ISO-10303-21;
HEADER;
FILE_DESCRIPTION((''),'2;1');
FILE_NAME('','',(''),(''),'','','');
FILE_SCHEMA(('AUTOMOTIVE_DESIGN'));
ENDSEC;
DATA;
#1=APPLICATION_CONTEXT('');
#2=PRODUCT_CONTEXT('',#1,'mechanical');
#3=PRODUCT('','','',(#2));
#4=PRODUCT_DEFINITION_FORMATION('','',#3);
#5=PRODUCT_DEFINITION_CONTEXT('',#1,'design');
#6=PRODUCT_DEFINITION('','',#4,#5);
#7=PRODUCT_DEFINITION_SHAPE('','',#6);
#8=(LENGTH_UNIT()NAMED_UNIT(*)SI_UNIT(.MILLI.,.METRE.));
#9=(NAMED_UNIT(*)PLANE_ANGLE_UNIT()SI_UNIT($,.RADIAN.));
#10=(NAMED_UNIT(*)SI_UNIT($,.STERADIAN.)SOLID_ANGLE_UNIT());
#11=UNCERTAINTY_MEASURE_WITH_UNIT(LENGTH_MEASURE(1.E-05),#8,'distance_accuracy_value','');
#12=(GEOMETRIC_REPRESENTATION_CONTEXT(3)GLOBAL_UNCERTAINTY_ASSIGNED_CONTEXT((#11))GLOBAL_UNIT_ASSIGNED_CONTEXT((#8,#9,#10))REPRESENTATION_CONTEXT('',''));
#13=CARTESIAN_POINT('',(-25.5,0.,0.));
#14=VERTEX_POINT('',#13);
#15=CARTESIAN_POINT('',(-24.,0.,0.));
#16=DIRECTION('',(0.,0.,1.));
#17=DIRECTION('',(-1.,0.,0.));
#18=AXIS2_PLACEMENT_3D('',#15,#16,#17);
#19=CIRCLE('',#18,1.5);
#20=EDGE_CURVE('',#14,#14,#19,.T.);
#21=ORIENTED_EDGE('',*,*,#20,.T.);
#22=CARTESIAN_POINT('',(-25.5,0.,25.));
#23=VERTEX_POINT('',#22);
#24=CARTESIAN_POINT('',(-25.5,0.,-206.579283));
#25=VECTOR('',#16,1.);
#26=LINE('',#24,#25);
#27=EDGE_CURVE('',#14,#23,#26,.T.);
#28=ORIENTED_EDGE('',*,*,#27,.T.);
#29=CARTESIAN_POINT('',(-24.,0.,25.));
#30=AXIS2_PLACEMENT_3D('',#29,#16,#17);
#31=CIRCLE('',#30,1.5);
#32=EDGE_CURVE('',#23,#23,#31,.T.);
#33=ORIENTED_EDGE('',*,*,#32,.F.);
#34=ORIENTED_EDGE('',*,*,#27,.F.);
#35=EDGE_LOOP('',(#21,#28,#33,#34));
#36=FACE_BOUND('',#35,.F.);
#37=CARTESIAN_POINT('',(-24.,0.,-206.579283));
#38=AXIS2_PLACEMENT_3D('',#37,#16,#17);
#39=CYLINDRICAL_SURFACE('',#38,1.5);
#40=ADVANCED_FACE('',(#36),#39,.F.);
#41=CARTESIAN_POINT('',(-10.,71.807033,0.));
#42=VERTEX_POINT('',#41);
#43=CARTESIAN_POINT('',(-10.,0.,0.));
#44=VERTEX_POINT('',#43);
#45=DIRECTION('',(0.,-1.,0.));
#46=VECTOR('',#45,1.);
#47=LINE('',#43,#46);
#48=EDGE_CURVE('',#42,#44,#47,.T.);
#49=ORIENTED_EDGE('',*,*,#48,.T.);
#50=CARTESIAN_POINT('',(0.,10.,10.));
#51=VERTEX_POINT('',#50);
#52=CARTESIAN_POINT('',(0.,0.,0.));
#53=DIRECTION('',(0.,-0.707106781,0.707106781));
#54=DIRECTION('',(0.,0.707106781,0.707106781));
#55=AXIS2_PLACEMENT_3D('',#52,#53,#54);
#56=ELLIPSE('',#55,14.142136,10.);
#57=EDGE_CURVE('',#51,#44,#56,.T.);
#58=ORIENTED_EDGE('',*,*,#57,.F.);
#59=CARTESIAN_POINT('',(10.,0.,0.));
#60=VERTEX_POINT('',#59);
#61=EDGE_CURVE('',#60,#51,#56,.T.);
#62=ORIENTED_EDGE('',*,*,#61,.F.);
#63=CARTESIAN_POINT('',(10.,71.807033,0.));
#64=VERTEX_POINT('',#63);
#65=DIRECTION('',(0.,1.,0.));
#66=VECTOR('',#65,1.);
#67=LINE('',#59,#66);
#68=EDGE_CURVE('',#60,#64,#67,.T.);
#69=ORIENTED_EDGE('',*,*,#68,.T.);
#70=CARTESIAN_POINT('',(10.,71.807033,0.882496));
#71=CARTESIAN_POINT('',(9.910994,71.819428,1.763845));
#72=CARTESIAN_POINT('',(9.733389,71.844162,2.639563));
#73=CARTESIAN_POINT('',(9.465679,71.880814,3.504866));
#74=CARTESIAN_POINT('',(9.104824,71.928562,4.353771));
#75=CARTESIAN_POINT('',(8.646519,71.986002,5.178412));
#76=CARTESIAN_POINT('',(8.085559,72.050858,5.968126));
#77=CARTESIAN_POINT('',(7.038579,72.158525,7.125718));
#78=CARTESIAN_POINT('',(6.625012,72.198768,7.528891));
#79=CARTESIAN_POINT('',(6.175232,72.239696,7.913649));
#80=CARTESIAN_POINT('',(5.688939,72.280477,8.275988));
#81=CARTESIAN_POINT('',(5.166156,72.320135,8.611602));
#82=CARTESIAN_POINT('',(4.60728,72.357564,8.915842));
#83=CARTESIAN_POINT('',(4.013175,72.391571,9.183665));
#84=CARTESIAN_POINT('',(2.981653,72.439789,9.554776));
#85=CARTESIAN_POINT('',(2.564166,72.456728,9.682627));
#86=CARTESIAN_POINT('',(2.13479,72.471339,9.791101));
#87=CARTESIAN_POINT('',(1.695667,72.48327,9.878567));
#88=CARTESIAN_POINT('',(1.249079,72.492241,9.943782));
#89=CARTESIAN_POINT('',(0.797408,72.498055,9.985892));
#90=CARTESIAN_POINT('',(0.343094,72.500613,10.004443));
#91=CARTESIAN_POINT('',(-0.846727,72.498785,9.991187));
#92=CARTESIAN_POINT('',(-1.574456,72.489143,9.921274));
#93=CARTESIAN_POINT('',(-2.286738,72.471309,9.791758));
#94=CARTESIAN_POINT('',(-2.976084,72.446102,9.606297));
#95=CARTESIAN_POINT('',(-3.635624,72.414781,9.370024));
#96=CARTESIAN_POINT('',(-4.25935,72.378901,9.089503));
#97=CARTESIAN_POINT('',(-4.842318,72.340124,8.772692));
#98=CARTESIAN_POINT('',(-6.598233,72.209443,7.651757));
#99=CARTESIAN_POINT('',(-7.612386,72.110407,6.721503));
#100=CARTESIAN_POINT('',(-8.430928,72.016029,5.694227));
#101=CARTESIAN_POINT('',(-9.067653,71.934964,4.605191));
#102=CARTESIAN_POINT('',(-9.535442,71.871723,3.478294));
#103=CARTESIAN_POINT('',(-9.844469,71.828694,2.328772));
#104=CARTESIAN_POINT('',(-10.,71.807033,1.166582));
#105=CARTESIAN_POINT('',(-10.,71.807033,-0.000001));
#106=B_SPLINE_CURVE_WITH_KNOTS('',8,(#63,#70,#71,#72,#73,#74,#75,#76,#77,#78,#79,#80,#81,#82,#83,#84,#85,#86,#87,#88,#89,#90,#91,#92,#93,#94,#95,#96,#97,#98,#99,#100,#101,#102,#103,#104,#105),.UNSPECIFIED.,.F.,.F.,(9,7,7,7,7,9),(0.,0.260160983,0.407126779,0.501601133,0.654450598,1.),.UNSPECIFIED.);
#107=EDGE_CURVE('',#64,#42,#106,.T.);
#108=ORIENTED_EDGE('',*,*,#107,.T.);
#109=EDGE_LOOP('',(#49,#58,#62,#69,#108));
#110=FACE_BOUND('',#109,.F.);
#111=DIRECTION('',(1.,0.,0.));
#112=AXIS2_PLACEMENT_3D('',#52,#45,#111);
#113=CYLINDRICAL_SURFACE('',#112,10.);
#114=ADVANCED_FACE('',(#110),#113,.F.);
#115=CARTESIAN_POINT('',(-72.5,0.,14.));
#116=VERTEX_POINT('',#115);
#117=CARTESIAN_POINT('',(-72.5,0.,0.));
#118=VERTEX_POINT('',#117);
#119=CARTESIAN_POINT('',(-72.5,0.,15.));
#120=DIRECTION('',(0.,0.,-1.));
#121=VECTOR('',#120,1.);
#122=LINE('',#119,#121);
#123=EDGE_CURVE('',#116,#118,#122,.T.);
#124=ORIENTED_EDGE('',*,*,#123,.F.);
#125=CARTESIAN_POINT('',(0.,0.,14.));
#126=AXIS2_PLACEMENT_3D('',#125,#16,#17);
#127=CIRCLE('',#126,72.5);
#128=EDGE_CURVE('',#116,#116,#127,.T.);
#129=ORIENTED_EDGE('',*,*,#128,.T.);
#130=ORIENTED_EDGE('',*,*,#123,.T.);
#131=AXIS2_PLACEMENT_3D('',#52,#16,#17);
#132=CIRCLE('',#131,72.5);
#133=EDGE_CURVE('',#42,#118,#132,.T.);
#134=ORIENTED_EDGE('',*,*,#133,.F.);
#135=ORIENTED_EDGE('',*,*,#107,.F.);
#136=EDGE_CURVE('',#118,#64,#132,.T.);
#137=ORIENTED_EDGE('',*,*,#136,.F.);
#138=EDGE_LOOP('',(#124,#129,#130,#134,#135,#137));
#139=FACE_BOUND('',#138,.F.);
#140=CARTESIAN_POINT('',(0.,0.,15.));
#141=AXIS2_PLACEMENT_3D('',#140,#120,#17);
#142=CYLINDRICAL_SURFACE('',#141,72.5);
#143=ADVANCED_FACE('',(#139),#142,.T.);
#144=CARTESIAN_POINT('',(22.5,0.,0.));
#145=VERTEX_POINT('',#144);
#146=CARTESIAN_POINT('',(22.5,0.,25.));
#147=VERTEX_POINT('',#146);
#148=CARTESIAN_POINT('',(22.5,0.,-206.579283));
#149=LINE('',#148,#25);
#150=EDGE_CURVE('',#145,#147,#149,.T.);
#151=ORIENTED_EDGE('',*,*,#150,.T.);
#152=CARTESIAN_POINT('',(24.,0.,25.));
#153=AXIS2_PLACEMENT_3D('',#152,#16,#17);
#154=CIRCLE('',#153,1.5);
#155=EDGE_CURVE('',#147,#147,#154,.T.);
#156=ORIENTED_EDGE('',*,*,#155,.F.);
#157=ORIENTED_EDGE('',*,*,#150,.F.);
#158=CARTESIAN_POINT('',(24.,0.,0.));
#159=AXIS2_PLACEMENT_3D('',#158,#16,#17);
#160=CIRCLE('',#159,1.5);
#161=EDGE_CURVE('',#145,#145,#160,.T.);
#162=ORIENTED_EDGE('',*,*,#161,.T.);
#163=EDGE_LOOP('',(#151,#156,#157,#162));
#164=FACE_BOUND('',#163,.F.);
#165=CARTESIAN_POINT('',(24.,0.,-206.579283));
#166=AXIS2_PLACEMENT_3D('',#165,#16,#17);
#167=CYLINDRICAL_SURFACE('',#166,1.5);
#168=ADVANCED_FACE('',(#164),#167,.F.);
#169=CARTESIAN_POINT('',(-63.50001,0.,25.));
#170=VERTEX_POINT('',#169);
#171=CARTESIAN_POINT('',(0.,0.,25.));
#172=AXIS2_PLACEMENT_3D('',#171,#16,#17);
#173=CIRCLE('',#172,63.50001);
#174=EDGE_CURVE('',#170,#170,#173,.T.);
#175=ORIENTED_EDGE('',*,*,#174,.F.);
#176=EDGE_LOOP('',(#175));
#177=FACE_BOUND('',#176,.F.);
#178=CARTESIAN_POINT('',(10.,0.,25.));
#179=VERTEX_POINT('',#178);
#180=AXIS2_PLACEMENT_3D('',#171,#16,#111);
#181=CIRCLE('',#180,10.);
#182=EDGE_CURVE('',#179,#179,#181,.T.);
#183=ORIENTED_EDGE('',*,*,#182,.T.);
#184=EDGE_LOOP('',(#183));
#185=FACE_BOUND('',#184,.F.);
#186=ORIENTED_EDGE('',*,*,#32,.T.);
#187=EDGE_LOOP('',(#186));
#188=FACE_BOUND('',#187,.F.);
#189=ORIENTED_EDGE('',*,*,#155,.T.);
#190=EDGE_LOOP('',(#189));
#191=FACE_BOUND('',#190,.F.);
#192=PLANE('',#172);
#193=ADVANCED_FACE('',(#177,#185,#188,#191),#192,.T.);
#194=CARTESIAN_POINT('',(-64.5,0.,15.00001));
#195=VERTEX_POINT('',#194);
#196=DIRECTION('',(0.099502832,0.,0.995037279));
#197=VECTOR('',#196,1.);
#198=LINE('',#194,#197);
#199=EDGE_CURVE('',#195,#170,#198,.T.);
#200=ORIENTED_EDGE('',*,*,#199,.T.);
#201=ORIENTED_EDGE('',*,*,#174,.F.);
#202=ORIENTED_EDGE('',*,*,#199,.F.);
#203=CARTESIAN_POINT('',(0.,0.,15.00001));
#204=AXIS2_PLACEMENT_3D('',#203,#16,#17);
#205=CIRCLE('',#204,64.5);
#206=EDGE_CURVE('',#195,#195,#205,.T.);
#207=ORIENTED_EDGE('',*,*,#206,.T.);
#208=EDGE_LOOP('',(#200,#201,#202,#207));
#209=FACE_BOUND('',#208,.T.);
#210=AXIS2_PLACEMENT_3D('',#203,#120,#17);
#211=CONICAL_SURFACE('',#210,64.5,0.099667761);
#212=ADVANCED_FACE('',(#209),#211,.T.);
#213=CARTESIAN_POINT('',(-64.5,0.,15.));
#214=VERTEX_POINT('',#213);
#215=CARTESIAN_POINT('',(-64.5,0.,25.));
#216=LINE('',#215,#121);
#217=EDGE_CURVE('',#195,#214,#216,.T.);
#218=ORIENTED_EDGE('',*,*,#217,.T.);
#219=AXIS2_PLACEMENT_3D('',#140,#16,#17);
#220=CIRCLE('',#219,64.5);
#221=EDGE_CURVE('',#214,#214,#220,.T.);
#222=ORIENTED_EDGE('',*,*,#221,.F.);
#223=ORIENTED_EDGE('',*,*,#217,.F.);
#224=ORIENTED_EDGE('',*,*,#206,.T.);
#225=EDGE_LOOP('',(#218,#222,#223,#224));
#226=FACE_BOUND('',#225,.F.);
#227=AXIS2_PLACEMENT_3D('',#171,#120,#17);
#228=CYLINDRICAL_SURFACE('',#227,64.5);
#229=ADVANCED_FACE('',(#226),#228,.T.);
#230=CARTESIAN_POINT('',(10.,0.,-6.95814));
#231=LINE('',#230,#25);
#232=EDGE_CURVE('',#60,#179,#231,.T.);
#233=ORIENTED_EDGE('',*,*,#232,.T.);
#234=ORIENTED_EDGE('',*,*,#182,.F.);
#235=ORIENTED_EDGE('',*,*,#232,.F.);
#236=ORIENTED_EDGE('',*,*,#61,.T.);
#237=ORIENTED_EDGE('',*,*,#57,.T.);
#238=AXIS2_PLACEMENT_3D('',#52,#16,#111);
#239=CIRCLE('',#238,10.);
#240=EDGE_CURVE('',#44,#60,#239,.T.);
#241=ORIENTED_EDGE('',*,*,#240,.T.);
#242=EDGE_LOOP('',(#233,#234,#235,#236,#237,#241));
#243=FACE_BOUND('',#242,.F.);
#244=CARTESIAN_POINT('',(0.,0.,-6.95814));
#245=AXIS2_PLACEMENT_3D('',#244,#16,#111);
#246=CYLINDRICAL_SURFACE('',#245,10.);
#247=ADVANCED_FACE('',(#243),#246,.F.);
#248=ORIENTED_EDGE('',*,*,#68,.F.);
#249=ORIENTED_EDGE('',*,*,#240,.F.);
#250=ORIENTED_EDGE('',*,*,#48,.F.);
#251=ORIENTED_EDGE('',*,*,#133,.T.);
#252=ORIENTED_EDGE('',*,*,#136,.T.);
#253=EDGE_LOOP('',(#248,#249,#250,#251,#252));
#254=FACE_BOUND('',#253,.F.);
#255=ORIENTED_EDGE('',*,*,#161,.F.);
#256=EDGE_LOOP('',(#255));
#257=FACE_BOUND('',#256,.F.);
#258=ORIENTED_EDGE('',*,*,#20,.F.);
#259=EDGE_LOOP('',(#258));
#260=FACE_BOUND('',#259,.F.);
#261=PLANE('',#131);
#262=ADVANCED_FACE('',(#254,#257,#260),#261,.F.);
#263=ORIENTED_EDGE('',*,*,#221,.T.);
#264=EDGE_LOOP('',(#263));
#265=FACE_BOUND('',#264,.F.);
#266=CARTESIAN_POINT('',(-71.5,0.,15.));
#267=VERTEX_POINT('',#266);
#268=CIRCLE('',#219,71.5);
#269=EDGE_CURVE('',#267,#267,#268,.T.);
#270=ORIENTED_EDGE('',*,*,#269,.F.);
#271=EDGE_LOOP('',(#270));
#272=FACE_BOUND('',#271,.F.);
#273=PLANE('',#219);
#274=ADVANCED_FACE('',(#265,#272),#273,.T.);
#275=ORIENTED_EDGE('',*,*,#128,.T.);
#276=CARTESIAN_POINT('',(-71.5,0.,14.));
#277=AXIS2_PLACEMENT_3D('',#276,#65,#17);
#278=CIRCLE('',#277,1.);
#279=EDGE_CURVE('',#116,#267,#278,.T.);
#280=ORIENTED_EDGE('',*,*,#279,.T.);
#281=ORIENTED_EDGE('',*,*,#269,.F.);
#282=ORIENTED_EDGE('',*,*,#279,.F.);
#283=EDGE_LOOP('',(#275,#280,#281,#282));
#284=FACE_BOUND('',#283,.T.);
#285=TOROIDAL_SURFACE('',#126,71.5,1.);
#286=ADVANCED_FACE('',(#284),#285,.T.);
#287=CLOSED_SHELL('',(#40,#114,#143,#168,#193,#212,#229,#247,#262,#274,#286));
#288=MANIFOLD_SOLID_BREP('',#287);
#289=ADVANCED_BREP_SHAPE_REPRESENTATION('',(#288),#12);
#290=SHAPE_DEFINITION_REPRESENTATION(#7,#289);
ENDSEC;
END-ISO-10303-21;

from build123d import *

# Parameters (mm, degrees)
F0_W     = 10
F0_H     = 18.0418604054
F0_H_2   = 25
F0_H_3   = 6.9581395946
F3_R     = 10
F4_DEPTH = 141.6
F5_R     = 1
F6_SIZE2 = 0.99999
F6_SIZE  = 9.99999
F8_D     = 3
F9_D     = 3


# Not quite as in the source:
# - a fillet or chamfer is up to 0.001 mm smaller than in the source, because OpenCascade refuses the exact size


with BuildPart() as f1:
    # F0 (on Front) → F1 (revolve)
    with BuildSketch(Plane.XZ):
        Polygon((-72.5, 15), (-72.5, 0), (0, 0), (0, 25), (-64.5, 25), (-64.5, 15), align=None)
    revolve(axis=Axis((0, 0, 12.5), (0, 0, 1)))

    # F0 (on Front) → F2 (revolve, cut)
    with BuildSketch(Plane.XZ):
        with Locations((5, 34.0209302027)):
            Rectangle(F0_W, F0_H)
        with Locations((5, 12.5)):
            Rectangle(F0_W, F0_H_2)
        with Locations((5, -3.4790697973)):
            Rectangle(F0_W, F0_H_3)
    revolve(axis=Axis((0, 0, 18.0418604054), (0, 0, 1)), mode=Mode.SUBTRACT)

    # F3 (on Front) → F4 (cut)
    with BuildSketch(Plane.XZ):
        Circle(F3_R)
    extrude(amount=-F4_DEPTH, mode=Mode.SUBTRACT)

    # F5
    f5_edges = [f1.edges().sort_by_distance(p)[0] for p in [
        (72.5, 0, 15),
    ]]
    fillet(f5_edges, radius=F5_R)

    # F6 (size 10 and 1 in the source; OpenCascade refuses exactly that, so slightly less here)
    f6_edges = [f1.edges().sort_by_distance(p)[0] for p in [
        (64.5, 0, 25),
    ]]
    chamfer(f6_edges, length=F6_SIZE, length2=F6_SIZE2)

    # F8 (through all)
    with Locations(Plane(origin=(0, 0, 0), x_dir=(1, 0, 0), z_dir=(0, 0, -1))):
        with Locations((24, 0)):
            Hole(F8_D / 2)

    # F9 (through all)
    with Locations(Plane(origin=(0, 0, 0), x_dir=(1, 0, 0), z_dir=(0, 0, -1))):
        with Locations((-24, 0)):
            Hole(F9_D / 2)


solid = f1.part
